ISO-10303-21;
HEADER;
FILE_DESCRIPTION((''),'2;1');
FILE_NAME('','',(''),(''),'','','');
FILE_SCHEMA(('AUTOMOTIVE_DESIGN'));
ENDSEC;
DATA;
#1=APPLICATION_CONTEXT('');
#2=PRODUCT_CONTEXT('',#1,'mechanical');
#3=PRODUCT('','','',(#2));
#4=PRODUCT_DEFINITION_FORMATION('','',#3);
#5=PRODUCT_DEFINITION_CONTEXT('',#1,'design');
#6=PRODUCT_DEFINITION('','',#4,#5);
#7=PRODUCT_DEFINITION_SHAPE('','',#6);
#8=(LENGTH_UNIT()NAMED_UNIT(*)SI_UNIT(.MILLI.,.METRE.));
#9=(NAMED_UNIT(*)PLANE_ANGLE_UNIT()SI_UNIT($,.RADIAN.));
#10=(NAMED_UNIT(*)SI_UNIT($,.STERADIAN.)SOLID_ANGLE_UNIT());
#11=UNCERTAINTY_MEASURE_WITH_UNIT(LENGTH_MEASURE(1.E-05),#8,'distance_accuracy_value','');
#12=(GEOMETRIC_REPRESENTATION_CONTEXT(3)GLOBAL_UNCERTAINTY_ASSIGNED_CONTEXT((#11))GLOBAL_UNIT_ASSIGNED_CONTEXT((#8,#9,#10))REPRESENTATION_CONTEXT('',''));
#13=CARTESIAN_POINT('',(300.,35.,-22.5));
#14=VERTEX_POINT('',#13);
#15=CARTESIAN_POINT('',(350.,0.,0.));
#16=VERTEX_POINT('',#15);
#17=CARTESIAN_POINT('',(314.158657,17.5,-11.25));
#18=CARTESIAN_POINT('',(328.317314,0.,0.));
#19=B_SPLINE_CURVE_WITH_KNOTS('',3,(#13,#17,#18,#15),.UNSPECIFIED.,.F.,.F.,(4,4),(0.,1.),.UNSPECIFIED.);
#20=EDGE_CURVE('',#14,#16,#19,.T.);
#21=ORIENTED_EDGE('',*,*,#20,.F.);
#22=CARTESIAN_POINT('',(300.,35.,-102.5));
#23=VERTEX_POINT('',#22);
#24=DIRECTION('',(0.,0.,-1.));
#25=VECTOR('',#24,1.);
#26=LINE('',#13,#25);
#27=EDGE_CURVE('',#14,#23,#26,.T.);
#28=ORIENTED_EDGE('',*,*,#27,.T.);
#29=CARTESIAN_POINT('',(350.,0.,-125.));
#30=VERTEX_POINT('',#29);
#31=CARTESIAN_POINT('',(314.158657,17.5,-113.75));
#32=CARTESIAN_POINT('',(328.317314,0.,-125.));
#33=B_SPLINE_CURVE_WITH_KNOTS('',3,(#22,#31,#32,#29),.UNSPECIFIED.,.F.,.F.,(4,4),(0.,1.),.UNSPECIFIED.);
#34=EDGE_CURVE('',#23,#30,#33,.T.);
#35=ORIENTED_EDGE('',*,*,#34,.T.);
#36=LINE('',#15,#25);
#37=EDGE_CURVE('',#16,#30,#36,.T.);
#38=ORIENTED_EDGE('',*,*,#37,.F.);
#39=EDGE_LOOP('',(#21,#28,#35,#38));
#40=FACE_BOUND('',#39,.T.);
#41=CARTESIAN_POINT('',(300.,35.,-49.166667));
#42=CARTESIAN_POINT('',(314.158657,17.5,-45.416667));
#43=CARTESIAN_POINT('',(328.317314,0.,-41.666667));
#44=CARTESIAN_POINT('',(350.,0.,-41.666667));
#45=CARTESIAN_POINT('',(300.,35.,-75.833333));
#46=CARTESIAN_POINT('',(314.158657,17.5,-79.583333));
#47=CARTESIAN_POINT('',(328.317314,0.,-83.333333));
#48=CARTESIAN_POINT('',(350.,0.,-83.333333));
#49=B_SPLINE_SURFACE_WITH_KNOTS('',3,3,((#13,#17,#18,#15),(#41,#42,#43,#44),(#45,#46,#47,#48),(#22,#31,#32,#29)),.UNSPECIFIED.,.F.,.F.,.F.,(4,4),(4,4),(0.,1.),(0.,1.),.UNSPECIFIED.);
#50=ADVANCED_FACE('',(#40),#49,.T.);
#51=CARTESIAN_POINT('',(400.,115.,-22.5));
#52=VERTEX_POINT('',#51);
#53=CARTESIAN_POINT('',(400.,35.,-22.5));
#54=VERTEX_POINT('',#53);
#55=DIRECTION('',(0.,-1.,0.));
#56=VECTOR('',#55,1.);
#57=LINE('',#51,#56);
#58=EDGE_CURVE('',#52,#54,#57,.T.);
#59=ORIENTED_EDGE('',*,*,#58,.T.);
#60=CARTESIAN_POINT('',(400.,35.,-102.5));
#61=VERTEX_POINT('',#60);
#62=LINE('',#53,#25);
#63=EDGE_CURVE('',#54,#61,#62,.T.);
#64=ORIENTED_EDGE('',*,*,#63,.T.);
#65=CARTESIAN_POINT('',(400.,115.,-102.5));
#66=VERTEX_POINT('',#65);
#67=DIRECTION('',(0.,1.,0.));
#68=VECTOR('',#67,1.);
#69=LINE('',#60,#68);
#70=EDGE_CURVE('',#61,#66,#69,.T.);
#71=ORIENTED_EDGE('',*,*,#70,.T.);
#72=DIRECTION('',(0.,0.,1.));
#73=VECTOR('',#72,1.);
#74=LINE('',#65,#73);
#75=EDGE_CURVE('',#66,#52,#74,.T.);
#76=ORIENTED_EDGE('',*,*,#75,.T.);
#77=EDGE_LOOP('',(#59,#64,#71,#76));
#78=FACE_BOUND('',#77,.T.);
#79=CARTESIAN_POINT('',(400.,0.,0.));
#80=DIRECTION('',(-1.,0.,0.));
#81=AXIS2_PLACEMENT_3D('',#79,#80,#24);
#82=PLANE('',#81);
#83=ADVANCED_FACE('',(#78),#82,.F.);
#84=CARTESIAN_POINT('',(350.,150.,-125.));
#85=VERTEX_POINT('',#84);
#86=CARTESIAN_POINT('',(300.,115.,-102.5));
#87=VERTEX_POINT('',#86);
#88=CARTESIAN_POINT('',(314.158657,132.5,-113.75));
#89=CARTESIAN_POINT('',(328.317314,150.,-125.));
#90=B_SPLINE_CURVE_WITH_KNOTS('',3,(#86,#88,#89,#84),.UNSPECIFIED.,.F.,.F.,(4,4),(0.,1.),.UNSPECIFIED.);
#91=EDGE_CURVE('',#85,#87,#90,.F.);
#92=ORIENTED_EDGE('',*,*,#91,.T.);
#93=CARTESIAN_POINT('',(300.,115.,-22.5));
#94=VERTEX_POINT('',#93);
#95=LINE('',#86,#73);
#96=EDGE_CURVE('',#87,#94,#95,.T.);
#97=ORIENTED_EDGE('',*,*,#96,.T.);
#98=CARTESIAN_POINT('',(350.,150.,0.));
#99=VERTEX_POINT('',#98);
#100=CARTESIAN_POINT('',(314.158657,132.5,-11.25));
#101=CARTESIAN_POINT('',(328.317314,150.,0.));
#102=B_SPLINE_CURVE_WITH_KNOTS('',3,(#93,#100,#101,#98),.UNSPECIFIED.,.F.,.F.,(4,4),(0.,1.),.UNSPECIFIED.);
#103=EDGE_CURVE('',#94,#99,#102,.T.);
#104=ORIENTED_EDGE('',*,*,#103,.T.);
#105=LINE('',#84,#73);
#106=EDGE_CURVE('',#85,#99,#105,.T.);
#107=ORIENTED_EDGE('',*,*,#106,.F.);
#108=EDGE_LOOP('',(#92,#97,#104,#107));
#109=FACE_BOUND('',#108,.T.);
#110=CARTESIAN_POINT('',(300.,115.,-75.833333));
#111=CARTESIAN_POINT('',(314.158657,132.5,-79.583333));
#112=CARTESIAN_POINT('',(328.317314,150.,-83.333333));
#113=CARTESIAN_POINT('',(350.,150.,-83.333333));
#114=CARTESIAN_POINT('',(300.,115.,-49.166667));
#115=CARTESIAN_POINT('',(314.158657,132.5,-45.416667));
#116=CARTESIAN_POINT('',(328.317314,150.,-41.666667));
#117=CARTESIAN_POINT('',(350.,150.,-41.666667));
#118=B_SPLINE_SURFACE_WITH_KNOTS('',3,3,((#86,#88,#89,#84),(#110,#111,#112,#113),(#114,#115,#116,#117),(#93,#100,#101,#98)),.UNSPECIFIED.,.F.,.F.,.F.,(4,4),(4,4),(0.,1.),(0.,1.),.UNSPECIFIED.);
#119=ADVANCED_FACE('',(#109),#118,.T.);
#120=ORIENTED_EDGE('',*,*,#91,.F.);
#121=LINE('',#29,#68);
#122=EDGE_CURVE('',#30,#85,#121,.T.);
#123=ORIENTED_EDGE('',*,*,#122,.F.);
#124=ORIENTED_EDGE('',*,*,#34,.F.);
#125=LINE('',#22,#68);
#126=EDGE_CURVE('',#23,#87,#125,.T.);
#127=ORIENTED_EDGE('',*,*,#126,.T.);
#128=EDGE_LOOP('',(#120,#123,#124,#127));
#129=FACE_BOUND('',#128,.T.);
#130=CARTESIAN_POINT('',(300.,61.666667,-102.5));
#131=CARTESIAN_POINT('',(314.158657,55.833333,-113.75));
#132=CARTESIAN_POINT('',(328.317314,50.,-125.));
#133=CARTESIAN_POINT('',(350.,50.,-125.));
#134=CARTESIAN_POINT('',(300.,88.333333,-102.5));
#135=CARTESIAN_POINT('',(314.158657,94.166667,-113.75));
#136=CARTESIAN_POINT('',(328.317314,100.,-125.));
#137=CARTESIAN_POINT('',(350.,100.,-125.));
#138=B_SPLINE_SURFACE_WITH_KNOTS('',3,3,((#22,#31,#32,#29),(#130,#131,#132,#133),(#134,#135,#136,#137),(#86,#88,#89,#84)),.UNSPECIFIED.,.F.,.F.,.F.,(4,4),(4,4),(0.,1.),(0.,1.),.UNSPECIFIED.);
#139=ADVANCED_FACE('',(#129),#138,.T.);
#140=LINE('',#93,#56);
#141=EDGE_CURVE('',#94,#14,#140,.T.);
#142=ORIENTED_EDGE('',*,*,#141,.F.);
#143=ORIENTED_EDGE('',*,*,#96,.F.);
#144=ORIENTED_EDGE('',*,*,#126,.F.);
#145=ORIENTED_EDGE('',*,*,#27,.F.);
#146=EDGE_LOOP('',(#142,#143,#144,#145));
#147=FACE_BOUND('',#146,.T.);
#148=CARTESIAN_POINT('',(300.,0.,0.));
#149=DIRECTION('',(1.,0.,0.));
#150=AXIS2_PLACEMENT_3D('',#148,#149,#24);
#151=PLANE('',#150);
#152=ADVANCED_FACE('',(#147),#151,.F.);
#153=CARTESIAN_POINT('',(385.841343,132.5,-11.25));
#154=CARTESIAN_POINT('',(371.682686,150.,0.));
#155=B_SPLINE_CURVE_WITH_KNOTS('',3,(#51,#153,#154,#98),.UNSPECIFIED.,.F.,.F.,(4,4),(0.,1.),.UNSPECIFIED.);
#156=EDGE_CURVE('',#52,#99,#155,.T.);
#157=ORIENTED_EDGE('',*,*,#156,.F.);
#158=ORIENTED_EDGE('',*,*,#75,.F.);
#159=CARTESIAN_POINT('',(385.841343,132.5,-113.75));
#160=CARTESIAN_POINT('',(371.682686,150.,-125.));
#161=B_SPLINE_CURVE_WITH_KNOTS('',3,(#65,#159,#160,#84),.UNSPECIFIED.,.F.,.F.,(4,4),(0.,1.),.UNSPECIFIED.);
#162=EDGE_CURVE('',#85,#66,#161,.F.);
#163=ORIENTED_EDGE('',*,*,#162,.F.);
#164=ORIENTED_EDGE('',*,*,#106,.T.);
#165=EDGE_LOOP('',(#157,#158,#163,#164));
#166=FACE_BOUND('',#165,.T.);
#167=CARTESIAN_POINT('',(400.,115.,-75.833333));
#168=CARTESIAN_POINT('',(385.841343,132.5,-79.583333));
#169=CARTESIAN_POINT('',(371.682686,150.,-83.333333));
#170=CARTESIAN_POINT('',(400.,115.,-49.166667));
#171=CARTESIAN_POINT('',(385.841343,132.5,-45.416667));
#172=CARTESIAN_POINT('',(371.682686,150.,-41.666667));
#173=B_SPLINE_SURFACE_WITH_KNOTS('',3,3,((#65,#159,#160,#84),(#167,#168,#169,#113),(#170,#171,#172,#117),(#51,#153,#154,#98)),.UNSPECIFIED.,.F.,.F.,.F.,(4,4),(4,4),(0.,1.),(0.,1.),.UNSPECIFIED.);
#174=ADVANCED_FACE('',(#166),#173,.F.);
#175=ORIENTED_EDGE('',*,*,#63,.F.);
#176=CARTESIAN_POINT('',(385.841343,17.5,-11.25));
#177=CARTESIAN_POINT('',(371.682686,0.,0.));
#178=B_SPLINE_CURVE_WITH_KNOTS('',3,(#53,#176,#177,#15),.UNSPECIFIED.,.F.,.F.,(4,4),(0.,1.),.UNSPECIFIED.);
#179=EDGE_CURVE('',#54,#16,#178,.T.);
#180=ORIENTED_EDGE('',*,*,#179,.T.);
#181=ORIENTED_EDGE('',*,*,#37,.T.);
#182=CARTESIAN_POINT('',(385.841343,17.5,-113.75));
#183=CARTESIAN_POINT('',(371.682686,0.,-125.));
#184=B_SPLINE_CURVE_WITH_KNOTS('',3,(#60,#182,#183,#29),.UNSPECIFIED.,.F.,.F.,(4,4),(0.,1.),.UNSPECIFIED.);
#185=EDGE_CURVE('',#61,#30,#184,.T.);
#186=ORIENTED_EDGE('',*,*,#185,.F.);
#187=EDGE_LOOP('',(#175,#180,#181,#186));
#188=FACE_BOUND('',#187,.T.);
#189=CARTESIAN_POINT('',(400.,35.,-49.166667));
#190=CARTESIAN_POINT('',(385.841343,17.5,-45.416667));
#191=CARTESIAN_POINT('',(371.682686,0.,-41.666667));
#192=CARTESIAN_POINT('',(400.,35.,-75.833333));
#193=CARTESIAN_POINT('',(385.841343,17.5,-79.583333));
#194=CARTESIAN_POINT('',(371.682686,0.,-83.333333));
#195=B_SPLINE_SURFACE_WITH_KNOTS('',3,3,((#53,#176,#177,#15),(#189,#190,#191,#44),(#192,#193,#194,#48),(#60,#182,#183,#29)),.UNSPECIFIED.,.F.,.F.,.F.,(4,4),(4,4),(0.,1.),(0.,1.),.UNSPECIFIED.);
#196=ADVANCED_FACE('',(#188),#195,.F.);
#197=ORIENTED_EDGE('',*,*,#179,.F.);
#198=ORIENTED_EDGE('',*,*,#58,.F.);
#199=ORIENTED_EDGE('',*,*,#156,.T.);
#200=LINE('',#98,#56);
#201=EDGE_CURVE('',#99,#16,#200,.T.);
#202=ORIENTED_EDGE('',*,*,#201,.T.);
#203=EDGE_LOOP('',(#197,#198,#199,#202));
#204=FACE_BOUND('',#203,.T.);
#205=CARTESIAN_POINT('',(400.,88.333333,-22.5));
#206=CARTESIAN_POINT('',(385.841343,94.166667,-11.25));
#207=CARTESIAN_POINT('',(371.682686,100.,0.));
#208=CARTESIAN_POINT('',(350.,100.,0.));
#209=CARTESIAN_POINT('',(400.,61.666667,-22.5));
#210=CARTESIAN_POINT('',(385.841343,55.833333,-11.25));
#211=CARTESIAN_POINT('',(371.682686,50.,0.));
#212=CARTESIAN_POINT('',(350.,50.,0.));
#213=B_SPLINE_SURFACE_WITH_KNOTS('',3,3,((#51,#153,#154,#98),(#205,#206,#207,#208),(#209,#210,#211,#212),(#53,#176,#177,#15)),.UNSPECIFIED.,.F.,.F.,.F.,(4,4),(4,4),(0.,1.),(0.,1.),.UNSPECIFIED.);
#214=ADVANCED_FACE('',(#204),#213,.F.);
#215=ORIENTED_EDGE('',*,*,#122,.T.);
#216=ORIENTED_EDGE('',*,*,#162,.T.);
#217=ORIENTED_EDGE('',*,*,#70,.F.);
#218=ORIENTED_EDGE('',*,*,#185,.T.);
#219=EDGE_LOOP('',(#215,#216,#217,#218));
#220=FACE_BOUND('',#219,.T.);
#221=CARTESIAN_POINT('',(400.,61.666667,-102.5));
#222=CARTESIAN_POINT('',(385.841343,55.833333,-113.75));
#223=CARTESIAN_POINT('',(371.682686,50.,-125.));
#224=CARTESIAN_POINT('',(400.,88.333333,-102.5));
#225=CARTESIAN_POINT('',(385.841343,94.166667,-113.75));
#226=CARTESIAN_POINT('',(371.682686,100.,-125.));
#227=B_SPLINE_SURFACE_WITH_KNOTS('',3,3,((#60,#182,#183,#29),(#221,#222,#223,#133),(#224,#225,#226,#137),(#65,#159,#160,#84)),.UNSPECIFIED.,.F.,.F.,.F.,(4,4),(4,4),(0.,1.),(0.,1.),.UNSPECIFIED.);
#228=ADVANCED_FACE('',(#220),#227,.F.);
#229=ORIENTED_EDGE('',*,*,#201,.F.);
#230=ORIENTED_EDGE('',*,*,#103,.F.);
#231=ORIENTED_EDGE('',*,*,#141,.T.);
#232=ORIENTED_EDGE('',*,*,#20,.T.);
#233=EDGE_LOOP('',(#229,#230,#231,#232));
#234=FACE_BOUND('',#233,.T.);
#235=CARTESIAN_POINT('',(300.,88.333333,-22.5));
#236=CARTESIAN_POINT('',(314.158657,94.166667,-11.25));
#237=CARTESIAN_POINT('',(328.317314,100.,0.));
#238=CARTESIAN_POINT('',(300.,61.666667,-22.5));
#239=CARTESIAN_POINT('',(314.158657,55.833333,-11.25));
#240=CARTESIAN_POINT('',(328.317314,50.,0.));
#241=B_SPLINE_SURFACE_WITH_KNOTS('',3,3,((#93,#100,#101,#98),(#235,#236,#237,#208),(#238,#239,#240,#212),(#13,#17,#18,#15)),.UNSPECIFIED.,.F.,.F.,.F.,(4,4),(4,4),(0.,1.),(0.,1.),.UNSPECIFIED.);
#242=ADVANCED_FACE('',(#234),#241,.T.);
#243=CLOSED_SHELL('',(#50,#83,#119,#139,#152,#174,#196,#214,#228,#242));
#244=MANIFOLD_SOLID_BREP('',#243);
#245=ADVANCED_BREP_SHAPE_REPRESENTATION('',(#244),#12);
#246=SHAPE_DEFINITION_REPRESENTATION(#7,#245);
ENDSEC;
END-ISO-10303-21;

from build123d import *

# Parameters (mm, degrees)
LOFT1_START   = -102.5
LOFT1_DEPTH   = 79.9999999
LOFT1_START_2 = -1e-07
LOFT1_2_DEPTH = 150.0000001
LOFT1_START_3 = -126
LOFT1_3_DEPTH = 127


with BuildPart() as part:
    # Loft1: read off the stored shape, not the designer's step
    # Loft1 outline → Loft1 (new body)
    with BuildSketch(Plane.XY.offset(LOFT1_START)):
        with BuildLine():
            add(Edge.make_bspline(
                [(300, 35), (314.158656807, 17.5), (328.317313615, 0), (350, 0)],
                knots=[0, 0, 0, 0, 1, 1, 1, 1], degree=3))
            Line((350, 0), (350, 150))
            add(Edge.make_bspline(
                [(300, 115), (314.158656807, 132.5), (328.317313615, 150), (350, 150)],
                knots=[0, 0, 0, 0, 1, 1, 1, 1], degree=3))
            Line((300, 115), (300, 35))
        make_face()
    loft1 = extrude(amount=LOFT1_DEPTH)

    # Loft1 2 outline → Loft1 2 (add)
    with BuildSketch(Plane(origin=(0, 0, 0), x_dir=(1, 0, 0), z_dir=(0, 1, 0)).offset(LOFT1_START_2)):
        with BuildLine():
            Line((350, 22.5000001), (300, 22.5))
            add(Edge.make_bspline(
                [(300, 22.5), (314.158656807, 11.25), (328.317313615, 0), (350, 0)],
                knots=[0, 0, 0, 0, 1, 1, 1, 1], degree=3))
            Line((350, 0), (350, 22.5000001))
        make_face()
        with BuildLine():
            Line((300, 102.5), (350, 102.5))
            Line((350, 102.5), (350, 125))
            add(Edge.make_bspline(
                [(300, 102.5), (314.158656807, 113.75), (328.317313615, 125), (350, 125)],
                knots=[0, 0, 0, 0, 1, 1, 1, 1], degree=3))
        make_face()
    loft1_2 = extrude(amount=LOFT1_2_DEPTH)

    # Loft1 3 outline → Loft1 3 (cut)
    with BuildSketch(Plane.XY.offset(LOFT1_START_3)):
        with BuildLine():
            Line((300, 35), (300, -1e-07))
            Line((300, -1e-07), (350, 0))
            add(Edge.make_bspline(
                [(300, 35), (314.158656807, 17.5), (328.317313615, 0), (350, 0)],
                knots=[0, 0, 0, 0, 1, 1, 1, 1], degree=3))
        make_face()
        with BuildLine():
            Line((300, 150), (300, 115))
            add(Edge.make_bspline(
                [(300, 115), (314.158656807, 132.5), (328.317313615, 150), (350, 150)],
                knots=[0, 0, 0, 0, 1, 1, 1, 1], degree=3))
            Line((350, 150), (300, 150))
        make_face()
    loft1_3 = extrude(amount=LOFT1_3_DEPTH, mode=Mode.SUBTRACT)

    # Mirror1: Loft1, Loft1 2, Loft1 3 across plane
    add(loft1.mirror(Plane(origin=(350, 0, 0), x_dir=(0, 0, 1), z_dir=(1, 0, 0))))
    add(loft1_2.mirror(Plane(origin=(350, 0, 0), x_dir=(0, 0, 1), z_dir=(1, 0, 0))))
    add(loft1_3.mirror(Plane(origin=(350, 0, 0), x_dir=(0, 0, 1), z_dir=(1, 0, 0))), mode=Mode.SUBTRACT)


solid = part.part
